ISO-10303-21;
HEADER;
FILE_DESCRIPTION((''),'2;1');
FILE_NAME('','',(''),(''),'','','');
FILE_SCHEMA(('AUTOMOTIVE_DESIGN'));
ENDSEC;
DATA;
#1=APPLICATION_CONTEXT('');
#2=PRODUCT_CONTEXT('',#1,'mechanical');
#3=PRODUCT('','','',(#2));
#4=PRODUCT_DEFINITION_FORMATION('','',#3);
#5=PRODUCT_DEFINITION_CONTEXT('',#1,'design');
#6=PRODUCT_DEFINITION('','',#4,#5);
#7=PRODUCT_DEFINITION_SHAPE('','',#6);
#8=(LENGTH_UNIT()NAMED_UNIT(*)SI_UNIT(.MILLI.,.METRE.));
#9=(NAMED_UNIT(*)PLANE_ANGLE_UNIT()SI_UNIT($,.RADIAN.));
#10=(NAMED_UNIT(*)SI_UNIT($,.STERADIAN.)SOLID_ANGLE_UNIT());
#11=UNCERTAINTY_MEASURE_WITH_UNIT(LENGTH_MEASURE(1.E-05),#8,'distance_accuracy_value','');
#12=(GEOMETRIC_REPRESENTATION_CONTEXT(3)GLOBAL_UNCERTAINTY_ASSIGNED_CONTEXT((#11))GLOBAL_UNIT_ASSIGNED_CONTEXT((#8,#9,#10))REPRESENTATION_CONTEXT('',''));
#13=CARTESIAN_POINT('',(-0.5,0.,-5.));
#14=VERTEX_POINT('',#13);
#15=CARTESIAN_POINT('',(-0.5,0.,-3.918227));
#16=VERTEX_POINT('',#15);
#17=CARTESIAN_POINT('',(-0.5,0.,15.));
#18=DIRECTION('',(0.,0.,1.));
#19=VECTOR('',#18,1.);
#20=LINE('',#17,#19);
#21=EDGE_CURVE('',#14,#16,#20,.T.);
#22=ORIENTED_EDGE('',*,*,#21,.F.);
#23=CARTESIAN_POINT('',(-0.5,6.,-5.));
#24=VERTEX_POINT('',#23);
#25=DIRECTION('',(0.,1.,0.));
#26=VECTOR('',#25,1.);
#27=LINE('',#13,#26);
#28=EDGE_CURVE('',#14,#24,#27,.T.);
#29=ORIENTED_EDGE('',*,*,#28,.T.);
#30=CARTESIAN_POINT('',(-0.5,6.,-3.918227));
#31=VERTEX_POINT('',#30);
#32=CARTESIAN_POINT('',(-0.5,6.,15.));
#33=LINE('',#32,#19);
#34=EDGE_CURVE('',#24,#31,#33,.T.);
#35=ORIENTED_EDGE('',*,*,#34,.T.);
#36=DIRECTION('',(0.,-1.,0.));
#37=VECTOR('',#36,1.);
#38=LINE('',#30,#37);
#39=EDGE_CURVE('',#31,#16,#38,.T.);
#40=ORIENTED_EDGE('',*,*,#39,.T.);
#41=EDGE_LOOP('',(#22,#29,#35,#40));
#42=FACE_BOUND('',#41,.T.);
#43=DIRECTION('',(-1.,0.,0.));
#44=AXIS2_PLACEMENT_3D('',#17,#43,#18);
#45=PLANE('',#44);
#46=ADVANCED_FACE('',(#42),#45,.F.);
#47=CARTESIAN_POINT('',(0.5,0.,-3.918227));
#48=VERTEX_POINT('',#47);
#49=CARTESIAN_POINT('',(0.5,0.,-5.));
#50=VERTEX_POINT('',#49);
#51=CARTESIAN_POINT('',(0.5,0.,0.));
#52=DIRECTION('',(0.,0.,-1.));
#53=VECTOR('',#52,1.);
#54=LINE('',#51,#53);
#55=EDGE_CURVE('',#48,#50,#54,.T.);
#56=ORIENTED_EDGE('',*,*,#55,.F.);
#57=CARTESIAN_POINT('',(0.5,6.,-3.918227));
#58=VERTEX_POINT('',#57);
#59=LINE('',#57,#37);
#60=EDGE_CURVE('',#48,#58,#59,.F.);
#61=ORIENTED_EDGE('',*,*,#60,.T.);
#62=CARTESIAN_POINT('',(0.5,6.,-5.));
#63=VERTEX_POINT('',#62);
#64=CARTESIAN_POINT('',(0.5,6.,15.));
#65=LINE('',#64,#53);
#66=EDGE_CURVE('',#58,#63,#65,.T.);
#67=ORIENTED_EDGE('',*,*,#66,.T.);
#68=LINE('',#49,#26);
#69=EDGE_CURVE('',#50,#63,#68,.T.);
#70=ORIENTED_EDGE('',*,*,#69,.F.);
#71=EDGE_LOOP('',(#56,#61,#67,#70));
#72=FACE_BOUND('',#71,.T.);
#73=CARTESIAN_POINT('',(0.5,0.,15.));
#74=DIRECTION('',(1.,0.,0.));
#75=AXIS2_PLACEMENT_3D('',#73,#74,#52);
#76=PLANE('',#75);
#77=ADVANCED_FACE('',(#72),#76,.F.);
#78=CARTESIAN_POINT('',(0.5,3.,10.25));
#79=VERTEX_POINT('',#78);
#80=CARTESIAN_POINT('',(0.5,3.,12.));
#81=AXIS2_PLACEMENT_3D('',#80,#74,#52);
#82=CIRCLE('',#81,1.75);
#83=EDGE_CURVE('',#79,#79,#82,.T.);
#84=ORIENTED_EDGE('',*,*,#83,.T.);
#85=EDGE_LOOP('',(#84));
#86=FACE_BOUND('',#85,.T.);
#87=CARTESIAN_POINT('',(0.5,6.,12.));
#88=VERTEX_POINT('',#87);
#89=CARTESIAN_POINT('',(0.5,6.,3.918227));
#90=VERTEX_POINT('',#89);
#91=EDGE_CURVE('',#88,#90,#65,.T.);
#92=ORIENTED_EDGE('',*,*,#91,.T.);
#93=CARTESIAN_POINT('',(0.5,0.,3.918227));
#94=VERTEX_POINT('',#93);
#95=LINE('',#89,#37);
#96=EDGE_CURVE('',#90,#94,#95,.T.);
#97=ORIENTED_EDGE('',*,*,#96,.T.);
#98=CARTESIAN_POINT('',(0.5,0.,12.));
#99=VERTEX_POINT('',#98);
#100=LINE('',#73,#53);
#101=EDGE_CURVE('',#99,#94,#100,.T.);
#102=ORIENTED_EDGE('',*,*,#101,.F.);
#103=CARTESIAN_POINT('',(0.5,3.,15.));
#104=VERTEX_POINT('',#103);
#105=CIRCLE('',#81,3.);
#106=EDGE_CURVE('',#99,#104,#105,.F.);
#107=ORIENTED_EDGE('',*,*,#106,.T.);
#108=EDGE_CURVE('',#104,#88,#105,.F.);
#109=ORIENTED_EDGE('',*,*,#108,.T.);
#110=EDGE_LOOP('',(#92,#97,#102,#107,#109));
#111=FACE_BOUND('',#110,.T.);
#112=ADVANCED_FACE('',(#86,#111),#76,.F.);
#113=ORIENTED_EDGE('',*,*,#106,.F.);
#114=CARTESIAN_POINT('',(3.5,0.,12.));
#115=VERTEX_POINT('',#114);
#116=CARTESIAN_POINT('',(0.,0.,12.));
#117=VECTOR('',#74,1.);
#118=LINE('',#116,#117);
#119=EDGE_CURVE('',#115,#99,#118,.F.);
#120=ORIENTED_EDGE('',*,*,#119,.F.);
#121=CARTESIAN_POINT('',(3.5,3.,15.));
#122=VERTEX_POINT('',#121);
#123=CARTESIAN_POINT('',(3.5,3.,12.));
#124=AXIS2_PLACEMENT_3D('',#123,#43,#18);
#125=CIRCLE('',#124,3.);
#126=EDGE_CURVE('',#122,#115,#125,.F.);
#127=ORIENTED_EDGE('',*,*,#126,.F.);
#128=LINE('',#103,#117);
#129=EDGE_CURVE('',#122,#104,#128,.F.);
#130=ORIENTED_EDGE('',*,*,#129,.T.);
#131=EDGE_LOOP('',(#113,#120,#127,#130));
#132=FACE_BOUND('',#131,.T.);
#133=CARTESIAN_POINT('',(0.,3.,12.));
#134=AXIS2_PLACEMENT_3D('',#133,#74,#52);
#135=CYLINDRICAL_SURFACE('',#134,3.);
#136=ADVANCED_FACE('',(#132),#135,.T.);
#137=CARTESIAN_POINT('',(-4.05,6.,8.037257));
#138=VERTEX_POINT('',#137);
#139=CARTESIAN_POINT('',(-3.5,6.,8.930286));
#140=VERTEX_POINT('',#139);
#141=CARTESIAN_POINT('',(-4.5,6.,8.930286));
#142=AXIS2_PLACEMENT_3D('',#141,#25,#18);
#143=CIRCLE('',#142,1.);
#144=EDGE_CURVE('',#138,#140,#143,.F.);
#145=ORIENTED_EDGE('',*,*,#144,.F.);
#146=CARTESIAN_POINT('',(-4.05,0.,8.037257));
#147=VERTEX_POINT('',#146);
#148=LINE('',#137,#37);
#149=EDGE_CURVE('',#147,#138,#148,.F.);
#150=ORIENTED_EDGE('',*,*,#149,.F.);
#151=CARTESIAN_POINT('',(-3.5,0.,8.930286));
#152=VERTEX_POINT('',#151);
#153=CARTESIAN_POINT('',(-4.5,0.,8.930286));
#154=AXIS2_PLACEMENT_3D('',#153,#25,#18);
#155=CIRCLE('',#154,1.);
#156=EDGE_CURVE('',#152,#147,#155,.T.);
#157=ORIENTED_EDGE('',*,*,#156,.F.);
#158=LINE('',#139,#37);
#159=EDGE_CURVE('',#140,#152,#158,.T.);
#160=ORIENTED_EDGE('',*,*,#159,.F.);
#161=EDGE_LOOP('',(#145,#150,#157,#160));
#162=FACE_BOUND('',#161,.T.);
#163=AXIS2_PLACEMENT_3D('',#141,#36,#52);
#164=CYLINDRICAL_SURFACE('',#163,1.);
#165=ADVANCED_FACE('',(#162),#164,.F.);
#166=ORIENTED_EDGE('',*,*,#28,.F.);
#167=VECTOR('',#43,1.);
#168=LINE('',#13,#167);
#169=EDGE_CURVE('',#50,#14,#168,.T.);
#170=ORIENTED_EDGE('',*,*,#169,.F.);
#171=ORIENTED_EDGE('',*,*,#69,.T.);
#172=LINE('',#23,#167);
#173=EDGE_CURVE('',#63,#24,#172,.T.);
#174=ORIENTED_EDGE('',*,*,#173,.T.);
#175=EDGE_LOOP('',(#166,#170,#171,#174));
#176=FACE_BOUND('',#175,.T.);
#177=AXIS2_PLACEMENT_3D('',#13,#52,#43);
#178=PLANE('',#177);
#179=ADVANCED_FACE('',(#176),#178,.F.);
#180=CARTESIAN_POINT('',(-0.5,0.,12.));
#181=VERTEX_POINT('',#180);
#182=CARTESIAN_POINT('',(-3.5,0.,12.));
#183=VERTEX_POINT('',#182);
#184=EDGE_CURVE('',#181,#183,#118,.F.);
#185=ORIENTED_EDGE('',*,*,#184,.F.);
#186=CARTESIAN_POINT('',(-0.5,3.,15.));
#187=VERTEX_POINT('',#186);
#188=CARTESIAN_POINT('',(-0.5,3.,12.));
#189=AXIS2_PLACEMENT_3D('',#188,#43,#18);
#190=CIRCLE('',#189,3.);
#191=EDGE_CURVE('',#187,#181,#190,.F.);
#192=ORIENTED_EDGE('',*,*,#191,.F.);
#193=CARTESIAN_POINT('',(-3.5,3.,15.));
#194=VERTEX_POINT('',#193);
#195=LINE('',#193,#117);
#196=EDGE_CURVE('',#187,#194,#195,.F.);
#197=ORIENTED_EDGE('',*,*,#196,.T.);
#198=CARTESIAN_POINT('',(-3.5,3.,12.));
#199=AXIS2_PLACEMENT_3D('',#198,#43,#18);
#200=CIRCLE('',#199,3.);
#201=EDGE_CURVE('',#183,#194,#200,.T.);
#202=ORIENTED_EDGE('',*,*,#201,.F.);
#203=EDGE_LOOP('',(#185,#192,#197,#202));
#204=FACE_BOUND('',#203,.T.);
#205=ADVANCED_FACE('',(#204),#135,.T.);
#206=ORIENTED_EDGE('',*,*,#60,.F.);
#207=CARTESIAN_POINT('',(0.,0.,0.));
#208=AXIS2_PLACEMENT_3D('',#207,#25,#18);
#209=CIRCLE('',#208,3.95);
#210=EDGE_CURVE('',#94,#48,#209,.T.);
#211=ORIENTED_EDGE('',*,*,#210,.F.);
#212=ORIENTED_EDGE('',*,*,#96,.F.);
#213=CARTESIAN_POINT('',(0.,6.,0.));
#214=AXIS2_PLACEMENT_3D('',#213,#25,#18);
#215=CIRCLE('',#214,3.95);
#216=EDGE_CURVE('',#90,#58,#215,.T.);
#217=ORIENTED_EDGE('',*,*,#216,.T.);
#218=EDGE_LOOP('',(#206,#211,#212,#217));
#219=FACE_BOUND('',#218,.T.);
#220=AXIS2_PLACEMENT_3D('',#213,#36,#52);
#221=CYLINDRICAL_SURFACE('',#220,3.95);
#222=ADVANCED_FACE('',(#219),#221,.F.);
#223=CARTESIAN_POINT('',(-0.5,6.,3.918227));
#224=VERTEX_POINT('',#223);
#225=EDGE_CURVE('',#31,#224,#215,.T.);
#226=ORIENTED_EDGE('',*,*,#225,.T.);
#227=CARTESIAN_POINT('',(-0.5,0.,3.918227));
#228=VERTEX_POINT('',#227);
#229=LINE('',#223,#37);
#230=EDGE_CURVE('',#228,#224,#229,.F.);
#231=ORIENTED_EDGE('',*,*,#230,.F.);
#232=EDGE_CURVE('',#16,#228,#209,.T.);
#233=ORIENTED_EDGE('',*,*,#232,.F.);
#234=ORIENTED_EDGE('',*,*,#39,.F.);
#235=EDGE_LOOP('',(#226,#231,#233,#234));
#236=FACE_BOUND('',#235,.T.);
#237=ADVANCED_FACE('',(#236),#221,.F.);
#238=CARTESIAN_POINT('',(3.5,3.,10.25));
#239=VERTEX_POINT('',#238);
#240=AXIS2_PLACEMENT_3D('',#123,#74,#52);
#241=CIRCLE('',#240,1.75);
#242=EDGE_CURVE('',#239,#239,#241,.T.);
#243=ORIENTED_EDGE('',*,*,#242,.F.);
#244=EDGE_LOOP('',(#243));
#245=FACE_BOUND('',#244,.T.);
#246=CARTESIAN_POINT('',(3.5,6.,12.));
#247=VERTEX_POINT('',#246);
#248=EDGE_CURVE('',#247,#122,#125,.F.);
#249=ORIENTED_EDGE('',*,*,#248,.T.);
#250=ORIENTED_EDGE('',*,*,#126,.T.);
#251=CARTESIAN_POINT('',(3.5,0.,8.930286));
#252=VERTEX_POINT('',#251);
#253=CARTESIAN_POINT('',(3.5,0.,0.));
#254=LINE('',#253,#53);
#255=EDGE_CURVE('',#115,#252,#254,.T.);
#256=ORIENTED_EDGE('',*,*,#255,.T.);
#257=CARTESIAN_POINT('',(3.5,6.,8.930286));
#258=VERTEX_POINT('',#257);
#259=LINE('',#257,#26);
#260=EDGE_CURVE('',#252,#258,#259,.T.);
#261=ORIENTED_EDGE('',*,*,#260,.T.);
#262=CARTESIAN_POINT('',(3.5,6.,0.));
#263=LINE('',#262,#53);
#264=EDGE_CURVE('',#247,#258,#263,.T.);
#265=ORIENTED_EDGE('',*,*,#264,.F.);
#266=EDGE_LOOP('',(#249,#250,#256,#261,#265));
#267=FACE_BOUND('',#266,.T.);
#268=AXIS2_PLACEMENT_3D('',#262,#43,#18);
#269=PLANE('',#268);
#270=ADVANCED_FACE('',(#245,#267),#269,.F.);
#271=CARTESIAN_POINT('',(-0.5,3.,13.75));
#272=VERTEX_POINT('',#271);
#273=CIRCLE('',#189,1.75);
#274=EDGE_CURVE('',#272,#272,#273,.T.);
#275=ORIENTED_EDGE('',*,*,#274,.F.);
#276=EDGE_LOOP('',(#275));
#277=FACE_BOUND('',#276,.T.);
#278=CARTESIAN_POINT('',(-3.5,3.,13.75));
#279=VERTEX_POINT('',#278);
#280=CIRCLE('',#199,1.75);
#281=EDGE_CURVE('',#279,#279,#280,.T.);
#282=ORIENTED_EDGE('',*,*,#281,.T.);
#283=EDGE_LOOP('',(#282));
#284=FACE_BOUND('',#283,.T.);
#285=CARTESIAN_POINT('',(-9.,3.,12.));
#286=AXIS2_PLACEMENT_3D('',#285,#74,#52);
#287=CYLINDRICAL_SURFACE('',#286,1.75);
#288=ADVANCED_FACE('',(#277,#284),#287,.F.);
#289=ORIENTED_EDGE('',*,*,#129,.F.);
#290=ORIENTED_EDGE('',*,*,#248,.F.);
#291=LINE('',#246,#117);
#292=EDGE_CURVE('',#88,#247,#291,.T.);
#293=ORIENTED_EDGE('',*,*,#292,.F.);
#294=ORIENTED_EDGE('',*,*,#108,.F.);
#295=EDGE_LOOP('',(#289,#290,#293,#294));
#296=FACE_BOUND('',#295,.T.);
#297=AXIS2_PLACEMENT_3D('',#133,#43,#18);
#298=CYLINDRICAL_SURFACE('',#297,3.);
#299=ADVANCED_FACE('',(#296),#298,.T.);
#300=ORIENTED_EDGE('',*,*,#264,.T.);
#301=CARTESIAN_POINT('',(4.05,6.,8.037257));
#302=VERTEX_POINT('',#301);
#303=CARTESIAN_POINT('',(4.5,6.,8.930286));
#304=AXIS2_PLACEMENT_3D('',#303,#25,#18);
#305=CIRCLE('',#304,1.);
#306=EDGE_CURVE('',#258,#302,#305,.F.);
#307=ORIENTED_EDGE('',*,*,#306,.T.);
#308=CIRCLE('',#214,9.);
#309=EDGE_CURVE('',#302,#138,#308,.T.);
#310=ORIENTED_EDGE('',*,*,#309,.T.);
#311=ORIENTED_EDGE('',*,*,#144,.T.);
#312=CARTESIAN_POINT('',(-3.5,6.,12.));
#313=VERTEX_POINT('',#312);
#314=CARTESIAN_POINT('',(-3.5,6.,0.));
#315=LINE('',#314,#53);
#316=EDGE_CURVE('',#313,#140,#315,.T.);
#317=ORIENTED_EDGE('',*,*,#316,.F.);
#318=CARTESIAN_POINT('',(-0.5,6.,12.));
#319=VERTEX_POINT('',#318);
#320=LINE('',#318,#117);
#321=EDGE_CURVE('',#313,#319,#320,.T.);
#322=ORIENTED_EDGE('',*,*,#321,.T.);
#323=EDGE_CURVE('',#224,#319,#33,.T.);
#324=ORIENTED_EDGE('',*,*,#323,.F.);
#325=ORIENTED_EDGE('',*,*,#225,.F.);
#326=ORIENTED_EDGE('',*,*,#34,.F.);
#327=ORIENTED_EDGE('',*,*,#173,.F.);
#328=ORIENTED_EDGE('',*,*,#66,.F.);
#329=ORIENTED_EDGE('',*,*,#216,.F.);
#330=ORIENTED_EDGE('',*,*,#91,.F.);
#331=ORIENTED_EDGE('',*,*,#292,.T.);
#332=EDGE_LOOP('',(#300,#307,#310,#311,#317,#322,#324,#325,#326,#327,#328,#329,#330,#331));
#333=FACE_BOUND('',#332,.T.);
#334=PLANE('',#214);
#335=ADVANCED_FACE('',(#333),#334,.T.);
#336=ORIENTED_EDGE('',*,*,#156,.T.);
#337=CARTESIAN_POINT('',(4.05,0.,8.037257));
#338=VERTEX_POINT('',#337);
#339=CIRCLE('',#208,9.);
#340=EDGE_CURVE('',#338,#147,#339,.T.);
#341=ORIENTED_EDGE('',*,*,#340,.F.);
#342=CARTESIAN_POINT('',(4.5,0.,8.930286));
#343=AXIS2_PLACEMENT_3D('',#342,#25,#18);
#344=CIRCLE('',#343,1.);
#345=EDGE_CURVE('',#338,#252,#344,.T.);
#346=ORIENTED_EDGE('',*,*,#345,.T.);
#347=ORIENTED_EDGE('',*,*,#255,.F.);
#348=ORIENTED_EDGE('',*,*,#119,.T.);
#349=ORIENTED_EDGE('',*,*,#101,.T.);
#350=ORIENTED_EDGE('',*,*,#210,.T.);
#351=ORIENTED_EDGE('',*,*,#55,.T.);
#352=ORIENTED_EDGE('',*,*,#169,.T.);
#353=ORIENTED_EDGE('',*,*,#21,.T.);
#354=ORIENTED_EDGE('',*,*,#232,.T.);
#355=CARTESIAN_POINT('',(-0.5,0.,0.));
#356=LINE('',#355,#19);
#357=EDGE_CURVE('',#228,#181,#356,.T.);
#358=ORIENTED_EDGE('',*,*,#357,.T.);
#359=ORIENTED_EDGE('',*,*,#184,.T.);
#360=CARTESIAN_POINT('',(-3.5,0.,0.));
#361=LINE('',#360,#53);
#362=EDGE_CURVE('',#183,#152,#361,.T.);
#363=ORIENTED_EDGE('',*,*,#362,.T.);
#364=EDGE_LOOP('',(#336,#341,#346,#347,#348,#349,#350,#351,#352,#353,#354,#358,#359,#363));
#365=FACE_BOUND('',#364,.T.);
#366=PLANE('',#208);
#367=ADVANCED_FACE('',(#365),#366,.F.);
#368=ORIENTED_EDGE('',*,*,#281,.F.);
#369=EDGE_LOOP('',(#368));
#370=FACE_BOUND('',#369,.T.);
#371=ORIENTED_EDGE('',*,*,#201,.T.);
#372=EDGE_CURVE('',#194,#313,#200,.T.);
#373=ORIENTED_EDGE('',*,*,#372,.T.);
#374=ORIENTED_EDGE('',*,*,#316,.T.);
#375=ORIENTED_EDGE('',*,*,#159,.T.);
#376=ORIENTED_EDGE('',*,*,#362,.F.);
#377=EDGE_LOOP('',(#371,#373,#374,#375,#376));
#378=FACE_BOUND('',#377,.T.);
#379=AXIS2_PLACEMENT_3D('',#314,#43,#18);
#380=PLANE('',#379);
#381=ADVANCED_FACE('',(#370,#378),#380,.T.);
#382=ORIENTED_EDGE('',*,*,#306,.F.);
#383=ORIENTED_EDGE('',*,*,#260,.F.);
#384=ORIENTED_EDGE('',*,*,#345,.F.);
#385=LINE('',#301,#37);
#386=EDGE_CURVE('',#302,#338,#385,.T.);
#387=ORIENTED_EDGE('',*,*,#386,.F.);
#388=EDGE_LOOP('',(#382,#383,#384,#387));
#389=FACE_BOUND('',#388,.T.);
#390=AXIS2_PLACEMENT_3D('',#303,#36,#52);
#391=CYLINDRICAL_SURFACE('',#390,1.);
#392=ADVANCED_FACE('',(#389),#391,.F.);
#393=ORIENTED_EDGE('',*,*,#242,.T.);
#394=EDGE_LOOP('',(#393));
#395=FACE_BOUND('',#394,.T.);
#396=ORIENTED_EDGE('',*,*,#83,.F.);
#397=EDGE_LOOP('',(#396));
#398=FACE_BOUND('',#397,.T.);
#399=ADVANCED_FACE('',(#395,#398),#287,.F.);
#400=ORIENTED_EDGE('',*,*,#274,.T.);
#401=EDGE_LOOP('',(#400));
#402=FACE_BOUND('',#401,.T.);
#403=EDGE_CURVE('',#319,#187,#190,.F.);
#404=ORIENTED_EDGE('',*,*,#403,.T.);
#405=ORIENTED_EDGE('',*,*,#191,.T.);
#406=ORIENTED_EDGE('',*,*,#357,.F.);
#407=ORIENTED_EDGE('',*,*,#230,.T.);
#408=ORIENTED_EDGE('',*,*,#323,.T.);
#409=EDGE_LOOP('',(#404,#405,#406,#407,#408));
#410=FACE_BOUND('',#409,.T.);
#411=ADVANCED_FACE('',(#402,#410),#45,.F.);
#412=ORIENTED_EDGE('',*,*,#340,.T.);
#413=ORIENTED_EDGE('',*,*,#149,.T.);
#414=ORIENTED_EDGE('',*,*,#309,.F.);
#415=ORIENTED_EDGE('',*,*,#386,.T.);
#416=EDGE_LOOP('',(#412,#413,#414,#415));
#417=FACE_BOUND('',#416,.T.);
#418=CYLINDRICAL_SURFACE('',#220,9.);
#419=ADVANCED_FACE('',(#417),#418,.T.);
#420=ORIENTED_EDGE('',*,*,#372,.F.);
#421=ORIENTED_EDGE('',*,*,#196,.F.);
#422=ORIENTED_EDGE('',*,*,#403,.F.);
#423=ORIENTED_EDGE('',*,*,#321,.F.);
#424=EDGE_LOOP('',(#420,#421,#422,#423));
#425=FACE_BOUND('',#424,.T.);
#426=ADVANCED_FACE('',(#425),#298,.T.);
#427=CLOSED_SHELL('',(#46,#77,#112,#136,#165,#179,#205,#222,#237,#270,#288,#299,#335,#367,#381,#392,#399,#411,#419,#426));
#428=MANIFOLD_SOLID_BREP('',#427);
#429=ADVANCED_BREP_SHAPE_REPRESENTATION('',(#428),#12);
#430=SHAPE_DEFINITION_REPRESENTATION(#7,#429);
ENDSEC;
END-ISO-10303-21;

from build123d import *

# Parameters (mm, degrees)
SKETCH1_R           = 3.95
BOSS_EXTRUDE1_DEPTH = 6
SKETCH2_W           = 1
SKETCH2_H           = 20
CUT_EXTRUDE1_DEPTH  = 19.493242009
FILLET1_R           = 3
SKETCH3_R           = 1.75
CUT_EXTRUDE2_DEPTH  = 21.426698216
FILLET2_R           = 1


with BuildPart() as part:
    # Sketch1 → Boss-Extrude1 (new body)
    # profile 1 of 3: a face of its own
    with BuildSketch(Plane(origin=(0, 0, 0), x_dir=(1, 0, 0), z_dir=(0, 1, 0))):
        with BuildLine():
            ThreePointArc((9, 0), (-4.974937186, 7.5), (-3.5, -8.291561976))
            Line((-3.5, -8.291561976), (-3.5, -4))
            Line((-3.5, -4), (3.5, -4))
            Line((3.5, -4), (3.5, -8.291561976))
            ThreePointArc((3.5, -8.291561976), (7.5, -4.974937186), (9, 0))
        make_face()
        with Locations(Location((0, 0, 0), (0, 0, 270))):
            Circle(SKETCH1_R, mode=Mode.SUBTRACT)
    # profile 2 of 3: a face of its own
    with BuildSketch(Plane(origin=(0, 0, 0), x_dir=(1, 0, 0), z_dir=(0, 1, 0))):
        with BuildLine():
            Line((-3.5, -4), (-3.5, -8.291561976))
            ThreePointArc((-3.5, -8.291561976), (0, -9), (3.5, -8.291561976))
            Line((3.5, -8.291561976), (3.5, -4))
            Line((3.5, -4), (-3.5, -4))
        make_face()
    # profile 3 of 3: a face of its own
    with BuildSketch(Plane(origin=(0, 0, 0), x_dir=(1, 0, 0), z_dir=(0, 1, 0))):
        with BuildLine():
            Line((-3.5, -8.291561976), (-3.5, -15))
            Line((-3.5, -15), (3.5, -15))
            Line((3.5, -15), (3.5, -8.291561976))
            ThreePointArc((3.5, -8.291561976), (0, -9), (-3.5, -8.291561976))
        make_face()
    extrude(amount=BOSS_EXTRUDE1_DEPTH)

    # Sketch2 → Cut-Extrude1 (cut, through all)
    with BuildSketch(Plane(origin=(0, 6, 0), x_dir=(1, 0, 0), z_dir=(0, 1, 0))):
        with Locations((0, -5)):
            Rectangle(SKETCH2_W, SKETCH2_H)
    extrude(amount=-CUT_EXTRUDE1_DEPTH, mode=Mode.SUBTRACT)

    # Fillet1
    fillet1_edges = [part.edges().sort_by_distance(p)[0] for p in [
        (-2, 0, 15),
        (-2, 6, 15),
        (2, 6, 15),
        (2, 0, 15),
    ]]
    fillet(fillet1_edges, radius=FILLET1_R - 0.0001)  # a hair under: the kernel refuses the full size

    # Sketch3 → Cut-Extrude2 (cut, through all)
    with BuildSketch(Plane(origin=(3.5, 0, 0), x_dir=(0, 0, -1), z_dir=(1, 0, 0))):
        with Locations((-12, 3)):
            Circle(SKETCH3_R)
    extrude(amount=-CUT_EXTRUDE2_DEPTH, mode=Mode.SUBTRACT)

    # Fillet2
    fillet2_edges = [part.edges().sort_by_distance(p)[0] for p in [
        (3.5, 3, 8.291561976),
        (-3.5, 3, 8.291561976),
    ]]
    fillet(fillet2_edges, radius=FILLET2_R)


solid = part.part
